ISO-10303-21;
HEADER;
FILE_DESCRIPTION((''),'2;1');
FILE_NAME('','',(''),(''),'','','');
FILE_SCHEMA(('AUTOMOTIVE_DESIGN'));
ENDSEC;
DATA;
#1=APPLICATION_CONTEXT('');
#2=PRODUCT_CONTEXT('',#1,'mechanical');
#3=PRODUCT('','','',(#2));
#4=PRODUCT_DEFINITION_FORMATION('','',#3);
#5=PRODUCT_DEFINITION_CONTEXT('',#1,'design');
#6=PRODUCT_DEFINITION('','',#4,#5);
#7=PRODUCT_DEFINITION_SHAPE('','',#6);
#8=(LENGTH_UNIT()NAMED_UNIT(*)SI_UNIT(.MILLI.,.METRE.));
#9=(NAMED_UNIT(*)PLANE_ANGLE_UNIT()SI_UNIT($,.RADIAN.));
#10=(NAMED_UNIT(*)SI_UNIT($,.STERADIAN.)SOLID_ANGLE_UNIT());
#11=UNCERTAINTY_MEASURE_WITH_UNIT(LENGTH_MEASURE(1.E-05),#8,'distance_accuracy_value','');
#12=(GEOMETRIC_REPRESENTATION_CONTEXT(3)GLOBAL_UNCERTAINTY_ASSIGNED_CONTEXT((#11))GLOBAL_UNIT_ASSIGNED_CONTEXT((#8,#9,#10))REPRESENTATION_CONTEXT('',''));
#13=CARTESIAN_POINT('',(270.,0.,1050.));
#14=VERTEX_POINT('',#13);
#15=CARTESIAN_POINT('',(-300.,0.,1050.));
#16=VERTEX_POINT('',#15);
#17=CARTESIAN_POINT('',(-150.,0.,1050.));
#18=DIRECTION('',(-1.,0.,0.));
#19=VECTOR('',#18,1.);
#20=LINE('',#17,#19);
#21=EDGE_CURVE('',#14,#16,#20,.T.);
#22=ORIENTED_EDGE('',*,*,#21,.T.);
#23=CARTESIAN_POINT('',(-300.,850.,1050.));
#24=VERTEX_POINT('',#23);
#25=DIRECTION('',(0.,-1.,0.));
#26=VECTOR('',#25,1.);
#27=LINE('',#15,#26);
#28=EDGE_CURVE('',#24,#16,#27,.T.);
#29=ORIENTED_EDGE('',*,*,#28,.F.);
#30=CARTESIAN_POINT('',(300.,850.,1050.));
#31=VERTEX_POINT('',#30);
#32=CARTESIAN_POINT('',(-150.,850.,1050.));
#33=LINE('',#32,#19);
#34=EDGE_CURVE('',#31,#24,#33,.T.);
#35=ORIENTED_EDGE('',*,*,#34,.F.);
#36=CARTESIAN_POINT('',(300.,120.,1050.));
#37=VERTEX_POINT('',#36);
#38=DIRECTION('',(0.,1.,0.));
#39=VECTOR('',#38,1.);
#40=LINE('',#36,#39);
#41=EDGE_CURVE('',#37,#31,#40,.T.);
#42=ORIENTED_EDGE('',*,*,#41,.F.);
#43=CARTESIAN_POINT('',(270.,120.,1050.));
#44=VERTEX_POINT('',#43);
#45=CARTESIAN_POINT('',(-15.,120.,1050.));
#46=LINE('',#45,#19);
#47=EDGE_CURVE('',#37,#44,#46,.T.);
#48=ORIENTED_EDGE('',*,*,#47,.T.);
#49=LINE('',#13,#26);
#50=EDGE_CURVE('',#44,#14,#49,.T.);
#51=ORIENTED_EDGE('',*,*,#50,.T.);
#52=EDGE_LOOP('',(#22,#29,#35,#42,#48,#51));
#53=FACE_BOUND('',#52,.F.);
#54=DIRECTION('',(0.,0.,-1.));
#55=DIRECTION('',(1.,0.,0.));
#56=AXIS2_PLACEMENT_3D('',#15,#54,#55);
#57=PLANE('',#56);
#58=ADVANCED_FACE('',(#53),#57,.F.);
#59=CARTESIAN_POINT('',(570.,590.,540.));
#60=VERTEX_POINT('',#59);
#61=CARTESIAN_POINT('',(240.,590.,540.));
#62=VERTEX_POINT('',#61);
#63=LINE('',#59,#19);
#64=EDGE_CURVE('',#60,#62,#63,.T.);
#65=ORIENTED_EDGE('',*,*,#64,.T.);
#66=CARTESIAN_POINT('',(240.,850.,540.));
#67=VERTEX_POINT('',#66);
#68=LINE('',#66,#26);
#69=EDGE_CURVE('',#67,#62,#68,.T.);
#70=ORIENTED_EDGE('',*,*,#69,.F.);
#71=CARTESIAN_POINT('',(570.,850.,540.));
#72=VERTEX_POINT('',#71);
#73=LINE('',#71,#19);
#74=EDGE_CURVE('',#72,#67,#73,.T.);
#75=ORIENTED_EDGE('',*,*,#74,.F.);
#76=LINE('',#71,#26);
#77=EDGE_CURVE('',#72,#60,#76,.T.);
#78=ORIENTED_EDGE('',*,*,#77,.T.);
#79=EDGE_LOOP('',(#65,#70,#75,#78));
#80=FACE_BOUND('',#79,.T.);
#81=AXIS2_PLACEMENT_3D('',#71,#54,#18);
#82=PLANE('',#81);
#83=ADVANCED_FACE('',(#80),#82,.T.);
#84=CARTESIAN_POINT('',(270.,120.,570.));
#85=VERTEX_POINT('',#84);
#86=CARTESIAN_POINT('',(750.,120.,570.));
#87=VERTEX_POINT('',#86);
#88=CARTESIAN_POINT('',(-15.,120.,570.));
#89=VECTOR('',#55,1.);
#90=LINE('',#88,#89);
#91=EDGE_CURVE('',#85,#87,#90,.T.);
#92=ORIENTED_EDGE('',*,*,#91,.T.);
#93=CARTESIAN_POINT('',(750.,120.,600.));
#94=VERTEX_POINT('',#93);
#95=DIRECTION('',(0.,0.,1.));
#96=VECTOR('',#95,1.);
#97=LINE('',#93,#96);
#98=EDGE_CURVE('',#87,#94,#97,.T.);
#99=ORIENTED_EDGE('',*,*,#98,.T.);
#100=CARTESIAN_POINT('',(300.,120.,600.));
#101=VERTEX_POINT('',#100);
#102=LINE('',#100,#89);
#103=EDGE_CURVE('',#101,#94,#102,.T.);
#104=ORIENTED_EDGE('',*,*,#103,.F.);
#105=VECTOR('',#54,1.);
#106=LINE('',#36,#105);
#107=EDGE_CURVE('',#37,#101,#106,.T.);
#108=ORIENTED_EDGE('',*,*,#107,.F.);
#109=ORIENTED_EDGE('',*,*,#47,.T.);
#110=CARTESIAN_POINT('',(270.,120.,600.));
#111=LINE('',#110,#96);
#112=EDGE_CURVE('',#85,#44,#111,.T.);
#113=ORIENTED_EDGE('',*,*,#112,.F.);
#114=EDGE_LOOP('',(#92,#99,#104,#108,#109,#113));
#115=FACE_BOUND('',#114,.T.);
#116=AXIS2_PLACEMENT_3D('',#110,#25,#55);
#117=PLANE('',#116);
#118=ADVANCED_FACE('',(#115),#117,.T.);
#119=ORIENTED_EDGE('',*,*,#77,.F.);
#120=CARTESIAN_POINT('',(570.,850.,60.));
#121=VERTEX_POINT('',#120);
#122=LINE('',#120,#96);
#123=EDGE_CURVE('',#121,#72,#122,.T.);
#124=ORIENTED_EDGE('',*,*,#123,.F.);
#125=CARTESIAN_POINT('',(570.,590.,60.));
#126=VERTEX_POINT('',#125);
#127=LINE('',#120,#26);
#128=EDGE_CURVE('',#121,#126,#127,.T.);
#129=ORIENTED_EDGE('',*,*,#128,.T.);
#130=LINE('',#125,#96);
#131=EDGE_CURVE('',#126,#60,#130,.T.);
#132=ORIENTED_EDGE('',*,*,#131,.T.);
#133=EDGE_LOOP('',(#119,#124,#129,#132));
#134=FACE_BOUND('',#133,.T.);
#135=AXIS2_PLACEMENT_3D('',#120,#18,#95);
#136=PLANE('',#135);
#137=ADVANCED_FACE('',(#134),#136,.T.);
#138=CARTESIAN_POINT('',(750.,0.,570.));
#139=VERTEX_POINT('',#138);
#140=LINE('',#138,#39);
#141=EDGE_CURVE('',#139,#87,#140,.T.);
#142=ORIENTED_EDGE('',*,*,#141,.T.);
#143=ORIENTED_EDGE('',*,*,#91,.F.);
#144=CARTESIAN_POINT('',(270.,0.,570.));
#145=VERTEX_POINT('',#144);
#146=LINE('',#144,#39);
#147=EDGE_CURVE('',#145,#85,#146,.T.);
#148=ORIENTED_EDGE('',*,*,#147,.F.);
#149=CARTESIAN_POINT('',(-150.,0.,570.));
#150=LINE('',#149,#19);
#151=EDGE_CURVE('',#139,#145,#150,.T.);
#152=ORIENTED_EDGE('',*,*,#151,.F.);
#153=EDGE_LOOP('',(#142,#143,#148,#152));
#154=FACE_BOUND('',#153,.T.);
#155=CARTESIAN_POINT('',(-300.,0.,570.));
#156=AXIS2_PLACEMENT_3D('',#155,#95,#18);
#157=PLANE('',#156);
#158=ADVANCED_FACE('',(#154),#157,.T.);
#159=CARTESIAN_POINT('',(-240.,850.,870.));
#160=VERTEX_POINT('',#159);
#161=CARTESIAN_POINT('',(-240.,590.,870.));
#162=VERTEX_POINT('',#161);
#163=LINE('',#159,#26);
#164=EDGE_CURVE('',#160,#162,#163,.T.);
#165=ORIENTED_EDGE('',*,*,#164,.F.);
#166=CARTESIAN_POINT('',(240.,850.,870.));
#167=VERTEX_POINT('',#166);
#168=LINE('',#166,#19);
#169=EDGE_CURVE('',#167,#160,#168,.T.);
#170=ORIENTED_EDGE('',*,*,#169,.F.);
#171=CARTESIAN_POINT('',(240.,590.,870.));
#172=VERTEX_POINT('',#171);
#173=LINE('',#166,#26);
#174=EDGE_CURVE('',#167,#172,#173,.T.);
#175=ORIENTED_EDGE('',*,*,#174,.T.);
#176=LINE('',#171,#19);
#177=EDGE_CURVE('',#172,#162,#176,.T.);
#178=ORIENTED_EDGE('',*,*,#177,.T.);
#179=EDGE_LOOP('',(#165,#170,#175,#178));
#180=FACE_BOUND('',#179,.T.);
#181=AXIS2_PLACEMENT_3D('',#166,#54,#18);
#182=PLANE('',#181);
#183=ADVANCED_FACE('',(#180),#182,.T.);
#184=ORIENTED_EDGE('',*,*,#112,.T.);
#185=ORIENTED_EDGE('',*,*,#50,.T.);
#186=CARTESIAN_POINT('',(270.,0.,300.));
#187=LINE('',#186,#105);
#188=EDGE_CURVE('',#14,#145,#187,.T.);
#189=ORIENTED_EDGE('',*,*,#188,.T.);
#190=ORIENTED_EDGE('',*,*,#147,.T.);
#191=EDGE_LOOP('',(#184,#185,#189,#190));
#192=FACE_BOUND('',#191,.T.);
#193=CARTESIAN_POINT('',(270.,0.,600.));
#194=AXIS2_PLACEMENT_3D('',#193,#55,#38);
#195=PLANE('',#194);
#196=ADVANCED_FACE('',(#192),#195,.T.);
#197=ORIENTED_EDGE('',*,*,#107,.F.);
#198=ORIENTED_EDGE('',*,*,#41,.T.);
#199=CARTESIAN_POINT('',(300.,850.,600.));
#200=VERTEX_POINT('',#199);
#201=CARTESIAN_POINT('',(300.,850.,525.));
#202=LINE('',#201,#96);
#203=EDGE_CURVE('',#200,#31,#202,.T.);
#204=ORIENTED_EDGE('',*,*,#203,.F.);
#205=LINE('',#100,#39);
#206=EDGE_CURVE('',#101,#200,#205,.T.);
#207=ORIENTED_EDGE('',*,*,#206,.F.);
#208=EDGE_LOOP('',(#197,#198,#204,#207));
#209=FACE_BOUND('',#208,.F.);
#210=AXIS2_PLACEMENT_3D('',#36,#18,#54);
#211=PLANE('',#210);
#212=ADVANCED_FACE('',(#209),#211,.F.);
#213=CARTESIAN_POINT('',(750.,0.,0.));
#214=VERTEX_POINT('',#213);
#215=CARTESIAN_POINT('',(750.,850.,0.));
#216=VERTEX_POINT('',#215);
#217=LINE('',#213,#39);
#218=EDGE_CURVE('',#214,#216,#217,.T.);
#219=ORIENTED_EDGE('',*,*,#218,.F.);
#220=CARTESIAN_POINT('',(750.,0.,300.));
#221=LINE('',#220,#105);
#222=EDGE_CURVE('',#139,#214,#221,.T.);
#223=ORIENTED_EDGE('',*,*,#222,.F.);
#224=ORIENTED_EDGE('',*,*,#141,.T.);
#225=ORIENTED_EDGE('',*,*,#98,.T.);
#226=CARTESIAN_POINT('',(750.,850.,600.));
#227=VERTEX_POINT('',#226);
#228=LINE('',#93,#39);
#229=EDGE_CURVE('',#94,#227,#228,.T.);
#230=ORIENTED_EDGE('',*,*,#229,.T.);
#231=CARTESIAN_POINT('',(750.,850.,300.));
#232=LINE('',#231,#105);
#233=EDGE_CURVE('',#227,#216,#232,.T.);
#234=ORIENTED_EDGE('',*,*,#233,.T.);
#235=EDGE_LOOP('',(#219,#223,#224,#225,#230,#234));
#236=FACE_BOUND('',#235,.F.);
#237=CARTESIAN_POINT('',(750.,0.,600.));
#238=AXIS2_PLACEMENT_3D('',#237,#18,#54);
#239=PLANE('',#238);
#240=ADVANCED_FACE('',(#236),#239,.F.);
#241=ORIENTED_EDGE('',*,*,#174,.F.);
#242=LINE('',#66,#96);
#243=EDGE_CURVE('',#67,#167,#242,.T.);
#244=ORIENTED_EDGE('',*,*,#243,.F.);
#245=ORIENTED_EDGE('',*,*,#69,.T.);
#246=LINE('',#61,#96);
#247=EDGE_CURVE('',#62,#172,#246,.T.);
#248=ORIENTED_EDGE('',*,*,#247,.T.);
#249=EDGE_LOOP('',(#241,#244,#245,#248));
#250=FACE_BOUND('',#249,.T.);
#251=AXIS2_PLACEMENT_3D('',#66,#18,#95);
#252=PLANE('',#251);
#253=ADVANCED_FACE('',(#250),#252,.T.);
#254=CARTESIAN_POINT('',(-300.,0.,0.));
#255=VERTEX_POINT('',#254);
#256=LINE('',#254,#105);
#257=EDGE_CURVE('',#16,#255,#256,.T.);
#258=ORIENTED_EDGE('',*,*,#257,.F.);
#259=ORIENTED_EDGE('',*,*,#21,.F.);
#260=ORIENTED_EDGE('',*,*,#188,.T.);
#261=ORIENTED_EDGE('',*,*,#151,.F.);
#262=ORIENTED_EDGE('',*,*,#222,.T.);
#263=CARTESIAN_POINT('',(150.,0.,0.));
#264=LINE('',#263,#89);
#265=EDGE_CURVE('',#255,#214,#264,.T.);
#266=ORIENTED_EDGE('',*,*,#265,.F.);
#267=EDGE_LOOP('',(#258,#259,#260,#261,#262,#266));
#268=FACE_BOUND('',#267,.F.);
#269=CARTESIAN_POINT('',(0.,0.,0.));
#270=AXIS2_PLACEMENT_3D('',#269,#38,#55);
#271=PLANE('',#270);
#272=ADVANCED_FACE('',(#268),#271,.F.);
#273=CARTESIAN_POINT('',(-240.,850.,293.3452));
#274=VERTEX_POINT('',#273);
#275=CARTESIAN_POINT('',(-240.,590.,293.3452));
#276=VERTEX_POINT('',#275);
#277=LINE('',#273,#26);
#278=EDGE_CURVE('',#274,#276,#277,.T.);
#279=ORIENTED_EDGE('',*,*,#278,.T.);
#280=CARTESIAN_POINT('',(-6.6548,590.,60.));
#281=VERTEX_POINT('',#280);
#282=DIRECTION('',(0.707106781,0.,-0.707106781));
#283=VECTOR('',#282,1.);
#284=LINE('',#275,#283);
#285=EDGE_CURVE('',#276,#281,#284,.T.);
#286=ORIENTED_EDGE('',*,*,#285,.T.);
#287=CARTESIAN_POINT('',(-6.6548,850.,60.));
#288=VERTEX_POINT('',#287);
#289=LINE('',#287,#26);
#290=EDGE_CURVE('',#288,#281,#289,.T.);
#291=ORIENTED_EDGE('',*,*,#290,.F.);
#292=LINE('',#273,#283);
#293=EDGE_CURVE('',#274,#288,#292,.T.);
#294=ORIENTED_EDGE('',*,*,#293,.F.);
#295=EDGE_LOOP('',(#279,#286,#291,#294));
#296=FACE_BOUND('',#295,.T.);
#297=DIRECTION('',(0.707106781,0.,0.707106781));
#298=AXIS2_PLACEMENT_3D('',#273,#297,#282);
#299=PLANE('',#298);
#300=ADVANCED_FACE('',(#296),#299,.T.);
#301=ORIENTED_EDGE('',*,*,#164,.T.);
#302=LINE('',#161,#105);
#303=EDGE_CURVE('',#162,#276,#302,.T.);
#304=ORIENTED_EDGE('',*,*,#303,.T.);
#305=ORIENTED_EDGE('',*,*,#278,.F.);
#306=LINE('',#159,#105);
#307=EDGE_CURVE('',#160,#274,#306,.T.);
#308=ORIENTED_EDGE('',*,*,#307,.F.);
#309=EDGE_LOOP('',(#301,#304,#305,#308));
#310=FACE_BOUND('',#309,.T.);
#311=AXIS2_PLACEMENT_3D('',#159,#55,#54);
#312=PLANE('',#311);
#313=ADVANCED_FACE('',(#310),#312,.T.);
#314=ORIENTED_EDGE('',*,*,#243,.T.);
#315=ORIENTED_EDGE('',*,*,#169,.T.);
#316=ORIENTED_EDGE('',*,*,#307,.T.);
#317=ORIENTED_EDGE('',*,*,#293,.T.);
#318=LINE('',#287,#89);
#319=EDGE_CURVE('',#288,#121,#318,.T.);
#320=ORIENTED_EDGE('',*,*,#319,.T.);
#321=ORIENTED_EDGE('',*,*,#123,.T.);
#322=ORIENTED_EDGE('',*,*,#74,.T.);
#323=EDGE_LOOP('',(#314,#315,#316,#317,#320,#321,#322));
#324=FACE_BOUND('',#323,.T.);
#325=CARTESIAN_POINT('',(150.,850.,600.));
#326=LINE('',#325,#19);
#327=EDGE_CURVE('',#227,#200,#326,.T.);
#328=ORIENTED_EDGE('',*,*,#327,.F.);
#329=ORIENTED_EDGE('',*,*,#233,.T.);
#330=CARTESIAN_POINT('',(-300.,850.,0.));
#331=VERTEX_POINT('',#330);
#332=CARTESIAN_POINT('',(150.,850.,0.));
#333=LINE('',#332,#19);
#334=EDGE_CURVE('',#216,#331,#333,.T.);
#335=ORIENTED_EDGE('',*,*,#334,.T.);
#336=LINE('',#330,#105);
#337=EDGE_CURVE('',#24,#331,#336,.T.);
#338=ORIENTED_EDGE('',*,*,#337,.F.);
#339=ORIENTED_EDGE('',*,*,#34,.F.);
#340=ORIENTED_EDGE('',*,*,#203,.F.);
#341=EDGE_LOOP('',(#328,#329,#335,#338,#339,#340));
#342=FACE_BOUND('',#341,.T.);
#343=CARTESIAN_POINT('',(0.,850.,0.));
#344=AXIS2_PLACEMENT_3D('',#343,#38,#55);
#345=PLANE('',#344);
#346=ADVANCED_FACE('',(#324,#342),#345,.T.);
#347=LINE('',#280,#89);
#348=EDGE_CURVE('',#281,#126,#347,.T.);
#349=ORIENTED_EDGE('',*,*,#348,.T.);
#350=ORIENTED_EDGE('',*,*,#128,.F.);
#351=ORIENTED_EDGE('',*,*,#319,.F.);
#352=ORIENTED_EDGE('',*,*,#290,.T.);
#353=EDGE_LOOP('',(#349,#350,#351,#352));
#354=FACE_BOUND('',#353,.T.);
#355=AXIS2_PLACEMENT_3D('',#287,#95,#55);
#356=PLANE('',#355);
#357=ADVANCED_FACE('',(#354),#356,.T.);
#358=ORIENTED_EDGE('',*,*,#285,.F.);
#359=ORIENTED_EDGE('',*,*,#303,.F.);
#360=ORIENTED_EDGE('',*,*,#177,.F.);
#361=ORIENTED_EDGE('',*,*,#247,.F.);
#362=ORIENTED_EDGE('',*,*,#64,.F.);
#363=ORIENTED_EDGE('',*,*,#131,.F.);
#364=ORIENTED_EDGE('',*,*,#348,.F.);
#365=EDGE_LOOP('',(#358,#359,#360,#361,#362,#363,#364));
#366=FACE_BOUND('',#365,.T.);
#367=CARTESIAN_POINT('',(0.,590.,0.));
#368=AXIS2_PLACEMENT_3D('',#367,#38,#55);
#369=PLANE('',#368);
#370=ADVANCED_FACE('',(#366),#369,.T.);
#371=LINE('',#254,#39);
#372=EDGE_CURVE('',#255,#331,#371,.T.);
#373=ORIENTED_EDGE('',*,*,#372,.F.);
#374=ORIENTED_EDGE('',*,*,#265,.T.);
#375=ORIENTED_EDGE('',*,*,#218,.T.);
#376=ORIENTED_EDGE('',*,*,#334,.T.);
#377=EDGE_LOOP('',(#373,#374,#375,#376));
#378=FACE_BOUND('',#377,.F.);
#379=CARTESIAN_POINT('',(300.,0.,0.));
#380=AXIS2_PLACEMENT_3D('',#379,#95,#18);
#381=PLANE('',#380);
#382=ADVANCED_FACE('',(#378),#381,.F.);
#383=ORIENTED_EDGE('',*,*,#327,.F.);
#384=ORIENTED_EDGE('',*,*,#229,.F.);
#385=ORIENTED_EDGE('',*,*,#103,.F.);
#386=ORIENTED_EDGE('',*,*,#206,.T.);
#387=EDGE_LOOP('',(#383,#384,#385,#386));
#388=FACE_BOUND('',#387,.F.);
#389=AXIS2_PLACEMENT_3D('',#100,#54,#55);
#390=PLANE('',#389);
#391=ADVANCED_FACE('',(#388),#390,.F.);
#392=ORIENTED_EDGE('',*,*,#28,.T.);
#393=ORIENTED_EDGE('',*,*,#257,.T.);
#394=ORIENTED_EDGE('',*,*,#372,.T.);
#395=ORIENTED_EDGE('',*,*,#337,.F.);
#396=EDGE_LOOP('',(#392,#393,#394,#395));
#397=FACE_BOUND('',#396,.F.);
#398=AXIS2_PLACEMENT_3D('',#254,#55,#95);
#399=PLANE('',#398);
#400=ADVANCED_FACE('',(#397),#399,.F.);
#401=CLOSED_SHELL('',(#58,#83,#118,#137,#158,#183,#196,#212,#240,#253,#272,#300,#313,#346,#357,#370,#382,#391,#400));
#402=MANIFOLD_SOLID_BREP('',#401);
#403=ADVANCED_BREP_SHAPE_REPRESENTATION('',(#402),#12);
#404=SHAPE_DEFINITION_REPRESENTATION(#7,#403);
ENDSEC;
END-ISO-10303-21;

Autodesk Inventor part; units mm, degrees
ref_plane "YZ Plane" through (0, 0, 0) normal (1, 0, 0) x (0, 1, 0)
ref_plane "XZ Plane" through (0, 0, 0) normal (0, 1, 0) x (-1, 0, 0)
ref_plane "XY Plane" through (0, 0, 0) normal (0, 0, 1) x (1, 0, 0)
sketch "Sketch1" plane through (0, 0, 0) normal (0, 1, 0) x (1, 0, 0)
  line L0 (300, 0) -> (-300, 0)
  line L1 (-300, 0) -> (-300, -600)
  line L2 (-300, -600) -> (300, -600)
  line L3 (300, -600) -> (300, 0)
  point P0 (0, 0)
  point P1 (0, 0)
  dimension "d0" = 600
  dimension "d1" = 600
extrude "Extrusion1" add sketch "Sketch1" along normal blind 850
sketch "Sketch2" plane through (-300, 0, 600) normal (0, 0, 1) x (-1, 0, 0)
  line L0 (-600, 0) -> (-600, -850) projected
  line L1 (-600, 0) -> (-570, 0)
  line L2 (-570, 0) -> (-570, -120)
  line L3 (-570, -120) -> (-600, -120)
  line L4 (-600, -120) -> (-600, 0)
  point P0 (-300, 0)
  dimension "d4" = 120
  dimension "d7" = 30
extrude "Extrusion2" cut sketch "Sketch2" against normal blind 30
move faces "Move3" translate (450, 0, 0) faces at (300, 323.3333, 190)
move faces "Move4" translate (0, 0, 450) faces at (240, 606.6667, 600)
sketch "Sketch3" plane through (270, 120, 570) normal (0, -1, 0) x (1, 0, 0)
  line L0 (-570, 480) -> (480, 480) projected
  line L1 (480, 480) -> (30, 480)
  line L2 (30, 480) -> (30, 30)
  line L3 (30, 30) -> (480, 30)
  line L4 (480, 30) -> (480, 480)
  line L5 (-570, 480) -> (-570, -570) projected
  line L6 (-570, -570) -> (480, -570) projected
  point P0 (-270, -570)
  point P1 (30, 480)
  dimension "d20" = 600
  dimension "d21" = 600
extrude "Extrusion3" cut sketch "Sketch3" against normal through all
sketch "Sketch4" plane through (0, 850, 0) normal (0, 1, 0) x (1, 0, 0)
  line L0 (-240, -293.3452) -> (-6.6548, -60)
  line L1 (-6.6548, -60) -> (570, -60)
  line L2 (570, -60) -> (570, -540)
  line L3 (570, -540) -> (240, -540)
  line L4 (240, -540) -> (240, -870)
  line L5 (240, -870) -> (-240, -870)
  line L6 (-240, -870) -> (-240, -293.3452)
  line L7 (300, -600) -> (300, -1050) construction
  line L8 (240, -540) -> (300, -600) construction
  line L9 (-300, 0) -> (-300, -1050) projected
  point P0 (0, 0)
  point P1 (0, -870)
  dimension "d24" = 480
  dimension "d25" = 330
  dimension "d26" = 810
  dimension "d27" = 576.6548
  dimension "d28" = 330
  dimension "d29" = 300
extrude "Extrusion4" cut sketch "Sketch4" against normal blind 260
equation "\"d19\" = d16"
equation "\"d16\" = 450"
properties part number "Mobile lavandino angolo"
